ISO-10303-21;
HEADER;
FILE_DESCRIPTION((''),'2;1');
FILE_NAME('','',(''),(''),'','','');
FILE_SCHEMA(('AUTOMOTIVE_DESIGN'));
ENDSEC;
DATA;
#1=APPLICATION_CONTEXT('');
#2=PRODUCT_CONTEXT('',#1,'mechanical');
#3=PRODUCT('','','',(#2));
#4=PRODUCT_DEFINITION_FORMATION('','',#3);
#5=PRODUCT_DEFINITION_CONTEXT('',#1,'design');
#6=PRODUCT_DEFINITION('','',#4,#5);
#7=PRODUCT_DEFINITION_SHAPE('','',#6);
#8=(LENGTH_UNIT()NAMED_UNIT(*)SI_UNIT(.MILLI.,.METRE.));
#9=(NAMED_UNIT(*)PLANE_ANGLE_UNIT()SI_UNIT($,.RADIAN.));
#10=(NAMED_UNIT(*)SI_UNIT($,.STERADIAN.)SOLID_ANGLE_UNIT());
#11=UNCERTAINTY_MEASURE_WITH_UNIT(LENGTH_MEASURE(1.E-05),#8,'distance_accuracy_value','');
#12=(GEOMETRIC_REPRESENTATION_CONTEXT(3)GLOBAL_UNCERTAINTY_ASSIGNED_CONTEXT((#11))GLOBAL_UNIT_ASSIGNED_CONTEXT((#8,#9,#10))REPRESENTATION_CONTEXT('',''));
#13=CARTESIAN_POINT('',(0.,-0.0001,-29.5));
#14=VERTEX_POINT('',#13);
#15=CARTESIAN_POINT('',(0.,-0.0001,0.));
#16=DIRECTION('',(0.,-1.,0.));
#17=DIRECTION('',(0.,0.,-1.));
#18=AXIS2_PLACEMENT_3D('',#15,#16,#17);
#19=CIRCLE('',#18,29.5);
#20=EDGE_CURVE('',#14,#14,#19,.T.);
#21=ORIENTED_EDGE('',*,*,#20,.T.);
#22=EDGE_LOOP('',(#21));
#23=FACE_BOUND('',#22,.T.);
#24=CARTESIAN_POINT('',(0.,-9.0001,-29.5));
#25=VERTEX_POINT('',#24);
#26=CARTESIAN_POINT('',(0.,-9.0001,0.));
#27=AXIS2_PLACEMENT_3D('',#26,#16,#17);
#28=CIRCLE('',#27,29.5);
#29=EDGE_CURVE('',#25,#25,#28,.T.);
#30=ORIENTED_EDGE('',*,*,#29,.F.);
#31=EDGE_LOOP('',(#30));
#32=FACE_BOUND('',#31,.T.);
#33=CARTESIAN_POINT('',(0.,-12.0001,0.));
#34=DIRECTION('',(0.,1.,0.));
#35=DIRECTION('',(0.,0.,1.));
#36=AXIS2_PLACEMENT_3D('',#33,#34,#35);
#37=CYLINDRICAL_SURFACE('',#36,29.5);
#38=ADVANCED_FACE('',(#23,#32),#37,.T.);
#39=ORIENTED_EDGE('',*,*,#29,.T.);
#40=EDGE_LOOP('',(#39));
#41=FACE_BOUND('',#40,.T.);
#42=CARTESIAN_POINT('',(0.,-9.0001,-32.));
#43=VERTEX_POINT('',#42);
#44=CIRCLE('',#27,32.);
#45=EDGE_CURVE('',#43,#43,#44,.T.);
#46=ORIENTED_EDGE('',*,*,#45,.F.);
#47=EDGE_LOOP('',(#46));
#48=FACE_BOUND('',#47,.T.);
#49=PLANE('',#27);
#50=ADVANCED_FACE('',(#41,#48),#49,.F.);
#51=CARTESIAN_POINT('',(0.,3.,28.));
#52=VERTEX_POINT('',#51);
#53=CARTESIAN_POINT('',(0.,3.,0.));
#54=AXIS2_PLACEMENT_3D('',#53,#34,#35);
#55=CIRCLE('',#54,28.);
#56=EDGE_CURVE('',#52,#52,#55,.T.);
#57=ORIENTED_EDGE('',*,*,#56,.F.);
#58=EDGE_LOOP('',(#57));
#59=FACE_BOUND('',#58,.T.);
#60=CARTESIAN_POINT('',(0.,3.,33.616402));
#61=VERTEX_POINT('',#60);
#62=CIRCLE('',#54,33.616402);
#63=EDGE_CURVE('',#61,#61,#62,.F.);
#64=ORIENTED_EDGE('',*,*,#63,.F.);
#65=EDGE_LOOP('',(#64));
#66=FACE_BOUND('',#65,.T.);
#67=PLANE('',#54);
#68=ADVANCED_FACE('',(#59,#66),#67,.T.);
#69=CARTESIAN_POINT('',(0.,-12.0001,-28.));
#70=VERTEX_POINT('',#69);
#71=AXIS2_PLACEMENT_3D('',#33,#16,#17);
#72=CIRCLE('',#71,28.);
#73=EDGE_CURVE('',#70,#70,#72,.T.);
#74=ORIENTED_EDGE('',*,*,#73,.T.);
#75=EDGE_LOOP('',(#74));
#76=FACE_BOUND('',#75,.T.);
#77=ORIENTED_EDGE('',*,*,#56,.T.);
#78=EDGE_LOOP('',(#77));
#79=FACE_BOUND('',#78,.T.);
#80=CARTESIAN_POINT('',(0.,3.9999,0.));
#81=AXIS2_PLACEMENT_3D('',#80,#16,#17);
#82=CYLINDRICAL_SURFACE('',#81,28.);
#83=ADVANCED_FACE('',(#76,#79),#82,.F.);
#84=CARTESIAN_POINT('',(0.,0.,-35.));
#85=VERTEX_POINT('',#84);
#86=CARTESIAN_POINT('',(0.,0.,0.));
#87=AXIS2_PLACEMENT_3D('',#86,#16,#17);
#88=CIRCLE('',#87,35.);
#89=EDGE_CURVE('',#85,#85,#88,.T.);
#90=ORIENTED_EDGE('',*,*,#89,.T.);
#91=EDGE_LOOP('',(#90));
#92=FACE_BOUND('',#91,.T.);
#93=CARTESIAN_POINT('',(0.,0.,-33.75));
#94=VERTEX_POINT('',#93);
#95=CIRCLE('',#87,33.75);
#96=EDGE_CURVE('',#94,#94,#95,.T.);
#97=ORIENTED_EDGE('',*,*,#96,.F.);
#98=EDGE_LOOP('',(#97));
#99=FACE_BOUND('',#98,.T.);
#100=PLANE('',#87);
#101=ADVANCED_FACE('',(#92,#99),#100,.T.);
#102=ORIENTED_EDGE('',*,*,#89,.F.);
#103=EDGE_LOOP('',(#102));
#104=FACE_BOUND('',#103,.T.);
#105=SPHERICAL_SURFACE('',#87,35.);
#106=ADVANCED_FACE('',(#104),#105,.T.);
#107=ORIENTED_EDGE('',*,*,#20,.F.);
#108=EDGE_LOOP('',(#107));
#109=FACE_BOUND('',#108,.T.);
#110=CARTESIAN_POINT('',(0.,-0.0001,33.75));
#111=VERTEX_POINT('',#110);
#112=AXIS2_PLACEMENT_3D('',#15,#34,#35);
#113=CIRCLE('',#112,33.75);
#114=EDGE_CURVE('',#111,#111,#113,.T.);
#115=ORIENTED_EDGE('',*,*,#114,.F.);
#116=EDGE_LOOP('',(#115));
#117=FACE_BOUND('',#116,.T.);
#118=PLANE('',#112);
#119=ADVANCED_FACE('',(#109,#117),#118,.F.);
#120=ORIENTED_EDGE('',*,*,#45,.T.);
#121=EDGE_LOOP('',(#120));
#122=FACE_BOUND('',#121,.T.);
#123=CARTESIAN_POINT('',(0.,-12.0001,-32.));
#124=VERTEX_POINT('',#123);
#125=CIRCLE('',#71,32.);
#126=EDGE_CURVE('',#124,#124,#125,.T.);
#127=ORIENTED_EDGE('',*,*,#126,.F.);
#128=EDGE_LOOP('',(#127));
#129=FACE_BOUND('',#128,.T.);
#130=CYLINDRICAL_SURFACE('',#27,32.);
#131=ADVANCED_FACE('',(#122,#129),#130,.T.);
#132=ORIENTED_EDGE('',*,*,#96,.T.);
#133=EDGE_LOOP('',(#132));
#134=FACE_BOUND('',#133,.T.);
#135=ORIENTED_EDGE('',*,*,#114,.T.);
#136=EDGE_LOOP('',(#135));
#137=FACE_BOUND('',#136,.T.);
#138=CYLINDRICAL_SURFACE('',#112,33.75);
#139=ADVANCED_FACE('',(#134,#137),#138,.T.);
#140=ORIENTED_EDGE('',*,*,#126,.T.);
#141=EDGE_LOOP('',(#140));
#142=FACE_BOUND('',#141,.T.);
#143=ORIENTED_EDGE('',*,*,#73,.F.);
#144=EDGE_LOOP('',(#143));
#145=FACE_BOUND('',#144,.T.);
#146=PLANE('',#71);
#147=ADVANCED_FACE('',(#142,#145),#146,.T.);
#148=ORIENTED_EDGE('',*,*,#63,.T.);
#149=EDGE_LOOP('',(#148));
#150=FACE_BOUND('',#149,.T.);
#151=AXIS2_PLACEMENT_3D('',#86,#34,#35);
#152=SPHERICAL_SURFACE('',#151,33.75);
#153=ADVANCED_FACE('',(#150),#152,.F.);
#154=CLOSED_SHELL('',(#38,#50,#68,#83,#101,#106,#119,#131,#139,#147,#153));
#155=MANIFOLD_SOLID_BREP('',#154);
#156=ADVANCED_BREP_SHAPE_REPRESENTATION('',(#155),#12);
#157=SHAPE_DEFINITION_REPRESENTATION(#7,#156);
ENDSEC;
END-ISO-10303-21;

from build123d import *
from build123d.topology import SkipClean

# Parameters (mm, degrees)
CUT_REVOLVE2_ANGLE      = 180
BOSS_EXTRUDE1_START     = -0.0001
BOSS_EXTRUDE1_OUTLINE_R = 33.75
BOSS_EXTRUDE1_DEPTH     = 3.0001
SKETCH7_R               = 29.5
BOSS_EXTRUDE2_DEPTH     = 12
SKETCH8_R               = 32
BOSS_EXTRUDE3_DEPTH     = 3
SKETCH9_R               = 28
CUT_EXTRUDE1_DEPTH      = 16


# Read off the part's stored shape, not the designer's step: Boss-Extrude1
with BuildPart() as part:
    # Sketch1 → Revolve1 (revolve)
    with BuildSketch(Plane.XY):
        with BuildLine():
            Line((35, 0), (-35, 0))
            ThreePointArc((-35, 0), (0, 35), (35, 0))
        make_face()
    revolve(axis=Axis((35, 0, 0), (-1, 0, 0)))

    # Sketch3 → Cut-Revolve1 (revolve, cut)
    with BuildSketch(Plane.XY):
        with BuildLine():
            Line((0.536808441, 33.745730644), (-0.536808441, -33.745730644))
            ThreePointArc((-0.536808441, -33.745730644), (-33.745730644, 0.536808441), (0.536808441, 33.745730644))
        make_face()
    revolve(axis=Axis((0.536808441, 33.745730644, 0), (-0.015905435294566866, -0.9998735005629914, 0)), mode=Mode.SUBTRACT)

    # Sketch5 → Cut-Revolve2 (revolve, cut)
    with SkipClean():  # the faces are left unmerged after this step: merging them gives an invalid solid
        with BuildSketch(Plane(origin=(0, 0, 0), x_dir=(1, 0, 0), z_dir=(0, 1, 0))):
            with BuildLine():
                Line((-35, 0), (35, 0))
                ThreePointArc((35, 0), (0, -35), (-35, 0))
            make_face()
        revolve(axis=Axis((-35, 0, 0), (1, 0, 0)), revolution_arc=CUT_REVOLVE2_ANGLE, mode=Mode.SUBTRACT)

    # Boss-Extrude1 outline → Boss-Extrude1 (add)
    with SkipClean():  # the faces are left unmerged after this step: merging them gives an invalid solid
        with BuildSketch(Plane(origin=(0, 0, 0), x_dir=(1, 0, 0), z_dir=(0, 1, 0)).offset(BOSS_EXTRUDE1_START)):
            Circle(BOSS_EXTRUDE1_OUTLINE_R)
        extrude(amount=BOSS_EXTRUDE1_DEPTH)

    # Sketch7 → Boss-Extrude2 (add)
    with SkipClean():  # the faces are left unmerged after this step: merging them gives an invalid solid
        with BuildSketch(Plane.XZ.offset(0.0001)):
            with Locations(Location((0, 0, 0), (0, 0, 270))):
                Circle(SKETCH7_R)
        extrude(amount=BOSS_EXTRUDE2_DEPTH)

    # Sketch8 → Boss-Extrude3 (add)
    with SkipClean():  # the faces are left unmerged after this step: merging them gives an invalid solid
        with BuildSketch(Plane.XZ.offset(12.0001)):
            with Locations(Location((0, 0, 0), (0, 0, 270))):
                Circle(SKETCH8_R)
        extrude(amount=-BOSS_EXTRUDE3_DEPTH)

    # Sketch9 → Cut-Extrude1 (cut)
    with SkipClean():  # the faces are left unmerged after this step: merging them gives an invalid solid
        with BuildSketch(Plane.XZ.offset(12.0001)):
            with Locations(Location((0, 0, 0), (0, 0, 270))):
                Circle(SKETCH9_R)
        extrude(amount=-CUT_EXTRUDE1_DEPTH, mode=Mode.SUBTRACT)


solid = part.part
